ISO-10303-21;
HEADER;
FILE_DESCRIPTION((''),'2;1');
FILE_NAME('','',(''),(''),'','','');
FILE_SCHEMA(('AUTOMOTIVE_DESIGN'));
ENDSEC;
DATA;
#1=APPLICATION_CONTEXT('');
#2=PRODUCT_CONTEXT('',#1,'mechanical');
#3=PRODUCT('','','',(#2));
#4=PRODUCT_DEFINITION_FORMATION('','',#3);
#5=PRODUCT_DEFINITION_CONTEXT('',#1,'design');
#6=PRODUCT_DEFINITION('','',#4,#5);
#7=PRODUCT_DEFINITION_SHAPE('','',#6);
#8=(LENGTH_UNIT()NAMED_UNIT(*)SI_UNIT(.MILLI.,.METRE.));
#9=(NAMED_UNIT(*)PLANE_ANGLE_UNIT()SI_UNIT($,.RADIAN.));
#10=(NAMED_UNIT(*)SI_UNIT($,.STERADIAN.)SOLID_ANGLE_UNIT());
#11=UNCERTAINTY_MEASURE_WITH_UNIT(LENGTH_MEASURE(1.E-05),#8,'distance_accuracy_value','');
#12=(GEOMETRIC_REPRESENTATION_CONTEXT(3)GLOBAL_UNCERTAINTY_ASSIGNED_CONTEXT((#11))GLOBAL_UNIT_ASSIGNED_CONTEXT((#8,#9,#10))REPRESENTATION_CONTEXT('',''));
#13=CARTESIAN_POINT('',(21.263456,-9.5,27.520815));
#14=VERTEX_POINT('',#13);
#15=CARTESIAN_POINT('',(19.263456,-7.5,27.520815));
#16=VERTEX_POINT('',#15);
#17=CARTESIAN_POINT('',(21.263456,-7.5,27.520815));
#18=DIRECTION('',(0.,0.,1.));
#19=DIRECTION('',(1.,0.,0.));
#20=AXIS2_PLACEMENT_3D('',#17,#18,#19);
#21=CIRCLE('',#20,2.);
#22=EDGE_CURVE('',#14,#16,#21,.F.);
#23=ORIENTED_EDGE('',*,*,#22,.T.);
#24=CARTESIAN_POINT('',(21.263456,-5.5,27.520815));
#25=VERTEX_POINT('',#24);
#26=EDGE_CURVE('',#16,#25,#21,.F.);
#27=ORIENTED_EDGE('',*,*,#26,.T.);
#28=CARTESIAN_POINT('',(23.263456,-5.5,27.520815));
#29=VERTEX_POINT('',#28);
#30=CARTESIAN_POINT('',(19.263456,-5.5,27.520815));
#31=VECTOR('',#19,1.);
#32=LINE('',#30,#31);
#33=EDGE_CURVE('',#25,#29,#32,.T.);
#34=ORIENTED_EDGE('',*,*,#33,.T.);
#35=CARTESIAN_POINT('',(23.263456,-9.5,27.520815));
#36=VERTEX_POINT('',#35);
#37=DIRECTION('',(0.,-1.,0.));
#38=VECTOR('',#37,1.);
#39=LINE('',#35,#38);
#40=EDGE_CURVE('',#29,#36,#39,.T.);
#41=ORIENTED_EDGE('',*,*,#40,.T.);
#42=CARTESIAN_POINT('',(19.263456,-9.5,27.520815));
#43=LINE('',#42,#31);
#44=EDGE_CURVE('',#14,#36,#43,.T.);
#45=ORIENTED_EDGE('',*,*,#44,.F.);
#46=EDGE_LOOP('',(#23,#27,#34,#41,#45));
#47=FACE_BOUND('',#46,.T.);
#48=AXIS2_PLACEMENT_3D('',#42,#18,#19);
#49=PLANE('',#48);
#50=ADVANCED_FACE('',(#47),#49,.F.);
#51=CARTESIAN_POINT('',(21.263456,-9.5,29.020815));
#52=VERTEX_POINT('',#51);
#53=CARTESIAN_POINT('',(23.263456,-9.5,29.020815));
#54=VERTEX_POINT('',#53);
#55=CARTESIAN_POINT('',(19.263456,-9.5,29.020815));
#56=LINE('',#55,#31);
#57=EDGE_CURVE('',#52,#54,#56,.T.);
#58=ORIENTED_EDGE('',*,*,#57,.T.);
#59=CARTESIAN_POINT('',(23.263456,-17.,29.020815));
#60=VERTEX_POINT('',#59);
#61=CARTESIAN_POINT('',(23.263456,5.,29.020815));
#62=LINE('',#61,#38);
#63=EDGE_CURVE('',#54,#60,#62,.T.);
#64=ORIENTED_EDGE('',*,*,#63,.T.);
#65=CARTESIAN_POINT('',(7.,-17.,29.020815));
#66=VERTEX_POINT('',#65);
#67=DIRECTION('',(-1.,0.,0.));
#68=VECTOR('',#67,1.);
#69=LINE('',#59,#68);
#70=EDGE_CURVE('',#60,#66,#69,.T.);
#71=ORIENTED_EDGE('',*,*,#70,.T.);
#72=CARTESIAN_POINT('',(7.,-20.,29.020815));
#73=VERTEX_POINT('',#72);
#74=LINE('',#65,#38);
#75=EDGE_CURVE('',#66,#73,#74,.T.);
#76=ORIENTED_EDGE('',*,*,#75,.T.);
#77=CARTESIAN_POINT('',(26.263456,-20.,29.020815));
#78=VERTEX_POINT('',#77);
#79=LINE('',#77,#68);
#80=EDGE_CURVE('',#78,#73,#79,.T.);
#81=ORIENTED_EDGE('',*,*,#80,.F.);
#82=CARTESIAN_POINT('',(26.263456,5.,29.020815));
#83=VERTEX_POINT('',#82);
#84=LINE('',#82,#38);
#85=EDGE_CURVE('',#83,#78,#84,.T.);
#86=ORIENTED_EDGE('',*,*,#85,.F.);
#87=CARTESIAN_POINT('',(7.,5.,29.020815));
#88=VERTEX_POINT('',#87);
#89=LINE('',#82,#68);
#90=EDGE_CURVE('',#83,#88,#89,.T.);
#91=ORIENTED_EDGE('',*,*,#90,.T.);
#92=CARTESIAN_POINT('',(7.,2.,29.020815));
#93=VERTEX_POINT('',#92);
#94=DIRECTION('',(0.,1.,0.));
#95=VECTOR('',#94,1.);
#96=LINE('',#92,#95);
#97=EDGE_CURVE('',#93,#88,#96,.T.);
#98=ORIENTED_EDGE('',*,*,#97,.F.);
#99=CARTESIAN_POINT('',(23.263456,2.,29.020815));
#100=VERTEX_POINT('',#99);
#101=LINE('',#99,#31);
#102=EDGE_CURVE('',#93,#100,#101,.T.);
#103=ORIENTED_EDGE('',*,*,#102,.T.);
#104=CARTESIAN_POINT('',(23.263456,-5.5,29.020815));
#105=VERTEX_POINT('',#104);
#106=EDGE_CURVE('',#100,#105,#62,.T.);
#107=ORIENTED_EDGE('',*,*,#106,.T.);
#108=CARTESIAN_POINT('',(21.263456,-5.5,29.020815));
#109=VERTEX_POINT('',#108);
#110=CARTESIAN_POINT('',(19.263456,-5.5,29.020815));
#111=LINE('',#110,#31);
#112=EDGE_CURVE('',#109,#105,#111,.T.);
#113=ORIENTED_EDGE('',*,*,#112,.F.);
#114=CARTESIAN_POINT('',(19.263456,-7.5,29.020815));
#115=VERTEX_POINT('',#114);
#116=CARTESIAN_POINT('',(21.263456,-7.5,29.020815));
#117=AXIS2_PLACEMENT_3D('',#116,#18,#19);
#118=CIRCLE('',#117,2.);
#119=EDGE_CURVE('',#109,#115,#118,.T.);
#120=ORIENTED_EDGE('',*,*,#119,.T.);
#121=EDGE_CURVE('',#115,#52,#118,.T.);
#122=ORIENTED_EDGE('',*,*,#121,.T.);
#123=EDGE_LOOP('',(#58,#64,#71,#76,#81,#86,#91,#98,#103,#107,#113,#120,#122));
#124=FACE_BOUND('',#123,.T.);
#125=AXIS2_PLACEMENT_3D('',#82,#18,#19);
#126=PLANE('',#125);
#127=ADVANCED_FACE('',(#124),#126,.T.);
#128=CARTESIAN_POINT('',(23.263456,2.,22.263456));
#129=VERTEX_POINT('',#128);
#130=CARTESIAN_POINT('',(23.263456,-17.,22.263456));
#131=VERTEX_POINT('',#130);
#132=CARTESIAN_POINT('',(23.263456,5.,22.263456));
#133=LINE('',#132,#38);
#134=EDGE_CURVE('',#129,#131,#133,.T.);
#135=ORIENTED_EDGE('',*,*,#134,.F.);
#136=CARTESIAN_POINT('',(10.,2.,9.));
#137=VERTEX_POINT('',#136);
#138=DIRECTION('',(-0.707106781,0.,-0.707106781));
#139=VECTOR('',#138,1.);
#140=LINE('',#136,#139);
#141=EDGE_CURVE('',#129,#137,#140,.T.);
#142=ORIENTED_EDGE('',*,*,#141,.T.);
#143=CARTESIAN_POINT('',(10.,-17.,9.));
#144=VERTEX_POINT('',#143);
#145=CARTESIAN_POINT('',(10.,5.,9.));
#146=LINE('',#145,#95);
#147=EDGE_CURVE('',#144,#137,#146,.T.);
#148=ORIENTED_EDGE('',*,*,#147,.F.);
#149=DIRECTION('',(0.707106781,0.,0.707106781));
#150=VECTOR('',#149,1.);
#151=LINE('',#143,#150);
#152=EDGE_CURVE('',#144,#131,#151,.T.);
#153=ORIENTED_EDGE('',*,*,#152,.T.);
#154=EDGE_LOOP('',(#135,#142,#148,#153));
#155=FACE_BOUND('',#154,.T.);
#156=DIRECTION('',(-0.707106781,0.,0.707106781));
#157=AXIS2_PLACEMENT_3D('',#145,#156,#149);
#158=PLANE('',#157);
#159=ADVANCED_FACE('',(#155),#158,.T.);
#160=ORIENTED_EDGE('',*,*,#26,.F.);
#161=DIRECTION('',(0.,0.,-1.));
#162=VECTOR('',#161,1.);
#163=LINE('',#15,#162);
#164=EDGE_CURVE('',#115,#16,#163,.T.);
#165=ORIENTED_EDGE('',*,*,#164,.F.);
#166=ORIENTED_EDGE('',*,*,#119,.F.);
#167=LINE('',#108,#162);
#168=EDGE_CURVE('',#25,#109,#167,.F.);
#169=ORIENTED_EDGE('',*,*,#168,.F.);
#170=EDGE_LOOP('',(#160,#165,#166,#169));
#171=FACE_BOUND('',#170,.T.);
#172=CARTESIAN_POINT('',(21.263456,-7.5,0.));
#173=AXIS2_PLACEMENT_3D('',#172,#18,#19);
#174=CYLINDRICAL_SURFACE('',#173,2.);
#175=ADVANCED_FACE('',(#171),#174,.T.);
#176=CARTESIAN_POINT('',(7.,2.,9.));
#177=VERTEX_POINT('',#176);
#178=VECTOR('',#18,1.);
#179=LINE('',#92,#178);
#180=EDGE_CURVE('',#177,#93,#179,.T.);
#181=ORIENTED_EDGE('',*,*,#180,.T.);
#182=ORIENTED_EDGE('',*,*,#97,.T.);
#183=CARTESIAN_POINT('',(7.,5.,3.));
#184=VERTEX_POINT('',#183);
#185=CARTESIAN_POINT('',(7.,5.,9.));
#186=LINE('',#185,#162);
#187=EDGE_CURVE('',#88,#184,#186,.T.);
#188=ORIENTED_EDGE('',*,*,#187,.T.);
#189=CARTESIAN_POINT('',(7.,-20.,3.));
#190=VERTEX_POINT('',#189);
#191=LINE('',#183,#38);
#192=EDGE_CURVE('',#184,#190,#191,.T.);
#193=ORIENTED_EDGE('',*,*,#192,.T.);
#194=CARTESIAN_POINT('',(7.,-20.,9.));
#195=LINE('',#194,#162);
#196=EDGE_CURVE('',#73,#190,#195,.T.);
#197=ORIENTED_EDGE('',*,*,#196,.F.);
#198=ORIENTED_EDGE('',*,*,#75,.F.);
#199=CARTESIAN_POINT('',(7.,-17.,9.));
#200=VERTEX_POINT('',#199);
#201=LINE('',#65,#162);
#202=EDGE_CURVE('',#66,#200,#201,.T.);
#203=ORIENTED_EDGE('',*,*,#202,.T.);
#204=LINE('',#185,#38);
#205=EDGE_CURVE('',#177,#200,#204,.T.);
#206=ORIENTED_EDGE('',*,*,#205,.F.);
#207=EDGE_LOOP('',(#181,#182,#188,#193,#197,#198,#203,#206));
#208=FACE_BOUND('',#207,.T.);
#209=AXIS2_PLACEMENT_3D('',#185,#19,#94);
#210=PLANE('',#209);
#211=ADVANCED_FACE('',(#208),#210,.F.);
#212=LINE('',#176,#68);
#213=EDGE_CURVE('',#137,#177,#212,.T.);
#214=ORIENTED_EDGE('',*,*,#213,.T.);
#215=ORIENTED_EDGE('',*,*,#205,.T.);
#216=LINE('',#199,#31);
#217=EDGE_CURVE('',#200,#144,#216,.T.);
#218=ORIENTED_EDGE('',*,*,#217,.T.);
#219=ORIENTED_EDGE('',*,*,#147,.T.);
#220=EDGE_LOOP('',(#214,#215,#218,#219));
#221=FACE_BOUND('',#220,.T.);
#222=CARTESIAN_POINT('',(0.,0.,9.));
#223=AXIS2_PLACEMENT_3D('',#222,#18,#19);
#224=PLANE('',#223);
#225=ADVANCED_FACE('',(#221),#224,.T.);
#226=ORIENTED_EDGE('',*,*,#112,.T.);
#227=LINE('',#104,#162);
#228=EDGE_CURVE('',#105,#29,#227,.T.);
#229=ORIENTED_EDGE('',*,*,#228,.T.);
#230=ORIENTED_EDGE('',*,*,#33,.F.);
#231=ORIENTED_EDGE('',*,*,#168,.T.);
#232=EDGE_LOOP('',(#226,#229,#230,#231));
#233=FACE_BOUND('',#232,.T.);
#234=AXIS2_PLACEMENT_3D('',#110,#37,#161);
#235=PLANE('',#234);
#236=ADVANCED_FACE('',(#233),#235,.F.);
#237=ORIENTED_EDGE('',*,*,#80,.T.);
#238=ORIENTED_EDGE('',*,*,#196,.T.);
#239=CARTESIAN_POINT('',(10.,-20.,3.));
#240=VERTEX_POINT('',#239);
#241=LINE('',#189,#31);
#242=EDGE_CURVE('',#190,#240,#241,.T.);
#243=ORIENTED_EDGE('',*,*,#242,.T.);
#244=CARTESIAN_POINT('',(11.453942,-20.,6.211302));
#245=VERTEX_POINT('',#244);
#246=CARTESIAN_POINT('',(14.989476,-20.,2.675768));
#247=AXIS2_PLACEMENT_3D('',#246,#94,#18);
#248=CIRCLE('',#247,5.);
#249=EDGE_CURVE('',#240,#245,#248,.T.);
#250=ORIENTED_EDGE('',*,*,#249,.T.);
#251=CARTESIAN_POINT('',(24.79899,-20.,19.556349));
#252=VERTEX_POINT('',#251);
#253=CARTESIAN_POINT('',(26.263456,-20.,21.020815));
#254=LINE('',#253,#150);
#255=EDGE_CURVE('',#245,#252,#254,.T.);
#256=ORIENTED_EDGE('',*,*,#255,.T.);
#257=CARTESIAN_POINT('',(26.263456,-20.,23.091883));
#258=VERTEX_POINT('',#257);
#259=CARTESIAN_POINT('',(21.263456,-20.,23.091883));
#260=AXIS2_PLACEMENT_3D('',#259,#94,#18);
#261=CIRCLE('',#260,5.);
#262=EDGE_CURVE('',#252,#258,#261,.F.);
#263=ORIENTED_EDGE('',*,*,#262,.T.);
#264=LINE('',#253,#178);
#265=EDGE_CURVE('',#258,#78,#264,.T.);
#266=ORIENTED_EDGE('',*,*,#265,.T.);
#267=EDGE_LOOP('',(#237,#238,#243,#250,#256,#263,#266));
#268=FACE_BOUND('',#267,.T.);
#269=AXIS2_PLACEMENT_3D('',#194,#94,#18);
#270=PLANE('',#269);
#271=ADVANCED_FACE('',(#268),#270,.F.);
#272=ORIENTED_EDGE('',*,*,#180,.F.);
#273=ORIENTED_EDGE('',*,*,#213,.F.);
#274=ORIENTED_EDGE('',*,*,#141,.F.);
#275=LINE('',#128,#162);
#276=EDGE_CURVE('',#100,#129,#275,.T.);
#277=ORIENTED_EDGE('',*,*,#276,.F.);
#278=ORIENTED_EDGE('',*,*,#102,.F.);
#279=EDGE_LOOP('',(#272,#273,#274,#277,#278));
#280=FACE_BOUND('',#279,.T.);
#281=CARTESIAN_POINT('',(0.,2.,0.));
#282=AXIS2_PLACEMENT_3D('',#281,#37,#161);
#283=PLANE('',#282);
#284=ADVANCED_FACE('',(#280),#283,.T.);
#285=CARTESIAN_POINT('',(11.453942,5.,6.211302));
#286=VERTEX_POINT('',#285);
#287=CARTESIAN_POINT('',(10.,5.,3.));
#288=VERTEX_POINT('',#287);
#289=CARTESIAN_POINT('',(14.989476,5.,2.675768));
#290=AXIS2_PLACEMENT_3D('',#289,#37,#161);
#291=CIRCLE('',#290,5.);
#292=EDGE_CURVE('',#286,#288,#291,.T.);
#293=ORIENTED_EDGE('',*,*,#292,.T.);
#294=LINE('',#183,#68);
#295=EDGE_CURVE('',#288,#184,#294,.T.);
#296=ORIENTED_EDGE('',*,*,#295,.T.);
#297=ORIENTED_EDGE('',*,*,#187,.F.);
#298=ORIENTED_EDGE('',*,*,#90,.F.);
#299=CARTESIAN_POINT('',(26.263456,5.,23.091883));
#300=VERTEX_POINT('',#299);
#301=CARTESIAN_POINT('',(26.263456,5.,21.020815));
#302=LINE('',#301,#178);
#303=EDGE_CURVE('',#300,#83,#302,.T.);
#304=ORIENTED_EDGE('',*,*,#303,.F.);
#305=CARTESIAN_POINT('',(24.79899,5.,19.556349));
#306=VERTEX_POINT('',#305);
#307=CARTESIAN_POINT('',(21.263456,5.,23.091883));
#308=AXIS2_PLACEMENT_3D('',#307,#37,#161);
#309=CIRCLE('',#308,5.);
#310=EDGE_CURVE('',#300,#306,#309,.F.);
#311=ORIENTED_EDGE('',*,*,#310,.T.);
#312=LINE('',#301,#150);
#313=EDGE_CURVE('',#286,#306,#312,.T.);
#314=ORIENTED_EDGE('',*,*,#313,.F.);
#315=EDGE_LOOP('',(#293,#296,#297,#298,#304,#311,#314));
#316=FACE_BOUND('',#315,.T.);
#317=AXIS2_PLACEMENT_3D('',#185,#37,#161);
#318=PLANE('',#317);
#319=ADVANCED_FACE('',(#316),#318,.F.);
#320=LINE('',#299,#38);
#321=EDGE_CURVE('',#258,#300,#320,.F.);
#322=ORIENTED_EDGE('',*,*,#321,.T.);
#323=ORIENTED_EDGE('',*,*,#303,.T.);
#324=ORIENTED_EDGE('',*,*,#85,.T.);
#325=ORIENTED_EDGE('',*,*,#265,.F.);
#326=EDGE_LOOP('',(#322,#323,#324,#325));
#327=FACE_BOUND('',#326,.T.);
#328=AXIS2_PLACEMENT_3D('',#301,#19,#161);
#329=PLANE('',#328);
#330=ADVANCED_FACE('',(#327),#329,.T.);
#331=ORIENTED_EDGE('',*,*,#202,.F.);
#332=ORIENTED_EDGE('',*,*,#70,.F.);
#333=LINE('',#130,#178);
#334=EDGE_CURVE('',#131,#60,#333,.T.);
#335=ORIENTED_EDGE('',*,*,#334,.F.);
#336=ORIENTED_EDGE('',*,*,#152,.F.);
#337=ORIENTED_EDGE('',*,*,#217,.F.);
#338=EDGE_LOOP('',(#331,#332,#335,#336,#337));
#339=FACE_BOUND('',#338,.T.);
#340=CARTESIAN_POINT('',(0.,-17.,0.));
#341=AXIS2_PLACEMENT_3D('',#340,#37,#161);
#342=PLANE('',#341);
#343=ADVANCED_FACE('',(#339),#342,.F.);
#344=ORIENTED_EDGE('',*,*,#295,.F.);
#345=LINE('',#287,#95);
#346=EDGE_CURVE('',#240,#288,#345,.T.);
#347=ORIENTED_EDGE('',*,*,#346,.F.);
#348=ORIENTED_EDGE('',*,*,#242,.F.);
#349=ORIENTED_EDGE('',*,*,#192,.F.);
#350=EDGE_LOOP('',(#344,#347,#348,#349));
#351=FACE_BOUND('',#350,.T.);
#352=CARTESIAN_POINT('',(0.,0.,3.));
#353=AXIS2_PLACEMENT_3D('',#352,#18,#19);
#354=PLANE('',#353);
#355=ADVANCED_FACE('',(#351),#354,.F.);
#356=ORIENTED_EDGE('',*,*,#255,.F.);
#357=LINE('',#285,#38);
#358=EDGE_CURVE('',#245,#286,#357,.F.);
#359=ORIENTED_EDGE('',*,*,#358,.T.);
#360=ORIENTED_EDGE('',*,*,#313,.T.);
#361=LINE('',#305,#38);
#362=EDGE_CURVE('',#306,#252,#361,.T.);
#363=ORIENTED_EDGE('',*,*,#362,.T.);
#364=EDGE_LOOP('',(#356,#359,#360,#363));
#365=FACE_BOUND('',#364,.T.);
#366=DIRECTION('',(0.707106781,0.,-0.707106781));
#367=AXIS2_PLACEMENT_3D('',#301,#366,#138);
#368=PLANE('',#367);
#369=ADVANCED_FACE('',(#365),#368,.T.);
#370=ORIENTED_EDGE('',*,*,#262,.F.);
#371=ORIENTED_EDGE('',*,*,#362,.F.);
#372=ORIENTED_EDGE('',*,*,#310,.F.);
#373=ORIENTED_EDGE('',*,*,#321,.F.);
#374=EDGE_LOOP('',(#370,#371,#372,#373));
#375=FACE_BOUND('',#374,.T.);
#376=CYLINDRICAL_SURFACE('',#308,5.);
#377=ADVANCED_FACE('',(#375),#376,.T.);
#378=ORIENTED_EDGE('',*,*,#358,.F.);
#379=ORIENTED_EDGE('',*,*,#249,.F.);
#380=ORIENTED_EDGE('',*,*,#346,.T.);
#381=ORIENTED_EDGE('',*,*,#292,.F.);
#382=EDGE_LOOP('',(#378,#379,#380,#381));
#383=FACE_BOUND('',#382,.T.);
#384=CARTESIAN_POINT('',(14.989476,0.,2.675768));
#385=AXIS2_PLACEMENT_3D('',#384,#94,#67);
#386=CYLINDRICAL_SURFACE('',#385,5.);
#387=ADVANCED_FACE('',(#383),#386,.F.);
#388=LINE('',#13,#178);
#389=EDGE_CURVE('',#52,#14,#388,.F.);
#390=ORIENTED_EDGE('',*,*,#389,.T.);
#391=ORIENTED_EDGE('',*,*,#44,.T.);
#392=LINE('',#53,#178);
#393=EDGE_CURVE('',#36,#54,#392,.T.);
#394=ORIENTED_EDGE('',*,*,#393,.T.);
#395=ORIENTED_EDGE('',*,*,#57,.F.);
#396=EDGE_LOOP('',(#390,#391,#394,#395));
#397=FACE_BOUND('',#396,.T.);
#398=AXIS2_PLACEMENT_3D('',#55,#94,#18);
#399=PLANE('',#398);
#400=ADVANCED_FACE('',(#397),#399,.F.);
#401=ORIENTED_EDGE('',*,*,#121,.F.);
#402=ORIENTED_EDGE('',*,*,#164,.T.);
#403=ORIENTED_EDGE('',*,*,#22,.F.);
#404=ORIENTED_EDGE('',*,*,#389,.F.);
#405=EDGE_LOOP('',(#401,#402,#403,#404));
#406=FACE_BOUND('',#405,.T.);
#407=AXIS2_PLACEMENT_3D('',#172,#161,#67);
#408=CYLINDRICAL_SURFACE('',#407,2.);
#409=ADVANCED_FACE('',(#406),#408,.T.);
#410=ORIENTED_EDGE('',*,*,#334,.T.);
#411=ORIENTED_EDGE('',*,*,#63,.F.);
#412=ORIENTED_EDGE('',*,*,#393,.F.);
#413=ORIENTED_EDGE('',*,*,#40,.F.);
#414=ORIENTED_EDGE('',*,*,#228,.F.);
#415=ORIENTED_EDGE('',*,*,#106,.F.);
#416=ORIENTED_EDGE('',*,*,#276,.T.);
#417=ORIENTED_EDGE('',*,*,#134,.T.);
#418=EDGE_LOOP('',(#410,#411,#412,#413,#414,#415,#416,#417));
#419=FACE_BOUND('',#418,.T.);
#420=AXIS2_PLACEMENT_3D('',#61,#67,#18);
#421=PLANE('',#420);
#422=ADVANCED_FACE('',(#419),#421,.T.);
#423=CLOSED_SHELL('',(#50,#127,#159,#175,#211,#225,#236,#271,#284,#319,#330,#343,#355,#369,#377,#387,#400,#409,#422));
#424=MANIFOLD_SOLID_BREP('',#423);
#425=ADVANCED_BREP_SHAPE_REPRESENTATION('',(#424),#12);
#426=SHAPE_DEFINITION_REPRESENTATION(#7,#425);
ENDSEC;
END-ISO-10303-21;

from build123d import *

# Parameters (mm, degrees)
SKETCH_1_W          = 10
SKETCH_1_H          = 15
EXTRUDE_1_DEPTH     = 3
SKETCH_2_W          = 3
SKETCH_2_H          = 25
EXTRUDE_2_DEPTH     = 6
EXTRUDE_3_DEPTH     = 25
EXTRUDE_4_DEPTH     = 3
EXTRUDE_5_DEPTH     = 3
FILLET_1_R          = 5
SKETCH_6_W          = 10
SKETCH_6_H          = 15
CUT_EXTRUDE_1_DEPTH = 3
FILLET_2_R          = 5
SKETCH_7_W          = 1.5
SKETCH_7_H          = 4
EXTRUDE_6_DEPTH     = 4
FILLET_3_R          = 2


# Some blends are built 0.0001 mm under size
with BuildPart() as part:
    # 草图1 → 凸台-拉伸1 (new body)
    with BuildSketch(Plane.XY):
        with Locations((5, -7.5)):
            Rectangle(SKETCH_1_W, SKETCH_1_H)
    extrude(amount=EXTRUDE_1_DEPTH)

    # 草图2 → 凸台-拉伸2 (add)
    with BuildSketch(Plane.XY.offset(3)):
        with Locations((8.5, -7.5)):
            Rectangle(SKETCH_2_W, SKETCH_2_H)
    extrude(amount=EXTRUDE_2_DEPTH)

    # 草图3 → 凸台-拉伸3 (add)
    with BuildSketch(Plane(origin=(0, -20, 0), x_dir=(-1, 0, 0), z_dir=(0, -1, 0))):
        Polygon((-10, -9), (-23.263455967, -22.263455967), (-23.263455967, -29.02081528), (-26.263455967, -29.02081528), (-26.263455967, -21.02081528), (-10, -4.757359313), align=None)
    extrude(amount=-EXTRUDE_3_DEPTH)

    # 草图4 → 凸台-拉伸4 (add)
    with BuildSketch(Plane(origin=(0, -20, 0), x_dir=(-1, 0, 0), z_dir=(0, -1, 0))):
        Polygon((-7, -9), (-10, -9), (-23.263455967, -22.263455967), (-23.263455967, -29.02081528), (-7, -29.02081528), align=None)
    extrude(amount=-EXTRUDE_4_DEPTH)

    # 草图5 → 凸台-拉伸5 (add)
    with BuildSketch(Plane(origin=(0, 5, 0), x_dir=(1, 0, 0), z_dir=(0, 1, 0))):
        Polygon((7, -9), (10, -9), (23.263455967, -22.263455967), (23.263455967, -29.02081528), (7, -29.02081528), align=None)
    extrude(amount=-EXTRUDE_5_DEPTH)

    # 圆角1
    fillet_1_edges = [part.edges().sort_by_distance(p)[0] for p in [
        (26.263455967, -7.5, 21.02081528),
    ]]
    fillet(fillet_1_edges, radius=FILLET_1_R)

    # 草图6 → 切除-拉伸1 (cut)
    with BuildSketch(Plane(origin=(0, 0, 0), x_dir=(-1, 0, 0), z_dir=(0, 0, -1))):
        with Locations((-5, -7.5)):
            Rectangle(SKETCH_6_W, SKETCH_6_H)
    extrude(amount=-CUT_EXTRUDE_1_DEPTH, mode=Mode.SUBTRACT)

    # 圆角2
    # the kernel refuses this fillet: 5 mm, written as the material it adds along each edge
    with BuildSketch(Plane(origin=(10, -20, 4.757359313), x_dir=(0, 0, -1), z_dir=(0, 1, 0))) as fillet_2_piece_1:
        with BuildLine():
            CenterArc((2.08159154, -4.989476271), FILLET_2_R, 93.718036518, 41.281963482)
            Line((-1.453942365, -1.453942365), (-1.524653044, -1.383231687))
            Line((-1.524653044, -1.383231687), (-0.070710678, 0.070710678))
            Line((-0.070710678, 0.070710678), (0, 0.1))
            ThreePointArc((0, 0.1), (0.878679656, 0.1), (1.750874668, 0.099789525))
            Line((1.750874668, 0.099789525), (1.757359313, 0))
        make_face()
    extrude(amount=25)

    # 草图7 → 凸台-拉伸6 (add)
    with BuildSketch(Plane.ZY.offset(-23.263455967)):
        with Locations((28.27081528, -7.5)):
            Rectangle(SKETCH_7_W, SKETCH_7_H)
    extrude(amount=EXTRUDE_6_DEPTH)

    # 圆角3
    fillet_3_edges = [part.edges().sort_by_distance(p)[0] for p in [
        (19.263455967, -9.5, 28.27081528),
        (19.263455967, -5.5, 28.27081528),
    ]]
    fillet(fillet_3_edges, radius=FILLET_3_R - 0.0001)  # a hair under: the kernel refuses the full size


solid = part.part
